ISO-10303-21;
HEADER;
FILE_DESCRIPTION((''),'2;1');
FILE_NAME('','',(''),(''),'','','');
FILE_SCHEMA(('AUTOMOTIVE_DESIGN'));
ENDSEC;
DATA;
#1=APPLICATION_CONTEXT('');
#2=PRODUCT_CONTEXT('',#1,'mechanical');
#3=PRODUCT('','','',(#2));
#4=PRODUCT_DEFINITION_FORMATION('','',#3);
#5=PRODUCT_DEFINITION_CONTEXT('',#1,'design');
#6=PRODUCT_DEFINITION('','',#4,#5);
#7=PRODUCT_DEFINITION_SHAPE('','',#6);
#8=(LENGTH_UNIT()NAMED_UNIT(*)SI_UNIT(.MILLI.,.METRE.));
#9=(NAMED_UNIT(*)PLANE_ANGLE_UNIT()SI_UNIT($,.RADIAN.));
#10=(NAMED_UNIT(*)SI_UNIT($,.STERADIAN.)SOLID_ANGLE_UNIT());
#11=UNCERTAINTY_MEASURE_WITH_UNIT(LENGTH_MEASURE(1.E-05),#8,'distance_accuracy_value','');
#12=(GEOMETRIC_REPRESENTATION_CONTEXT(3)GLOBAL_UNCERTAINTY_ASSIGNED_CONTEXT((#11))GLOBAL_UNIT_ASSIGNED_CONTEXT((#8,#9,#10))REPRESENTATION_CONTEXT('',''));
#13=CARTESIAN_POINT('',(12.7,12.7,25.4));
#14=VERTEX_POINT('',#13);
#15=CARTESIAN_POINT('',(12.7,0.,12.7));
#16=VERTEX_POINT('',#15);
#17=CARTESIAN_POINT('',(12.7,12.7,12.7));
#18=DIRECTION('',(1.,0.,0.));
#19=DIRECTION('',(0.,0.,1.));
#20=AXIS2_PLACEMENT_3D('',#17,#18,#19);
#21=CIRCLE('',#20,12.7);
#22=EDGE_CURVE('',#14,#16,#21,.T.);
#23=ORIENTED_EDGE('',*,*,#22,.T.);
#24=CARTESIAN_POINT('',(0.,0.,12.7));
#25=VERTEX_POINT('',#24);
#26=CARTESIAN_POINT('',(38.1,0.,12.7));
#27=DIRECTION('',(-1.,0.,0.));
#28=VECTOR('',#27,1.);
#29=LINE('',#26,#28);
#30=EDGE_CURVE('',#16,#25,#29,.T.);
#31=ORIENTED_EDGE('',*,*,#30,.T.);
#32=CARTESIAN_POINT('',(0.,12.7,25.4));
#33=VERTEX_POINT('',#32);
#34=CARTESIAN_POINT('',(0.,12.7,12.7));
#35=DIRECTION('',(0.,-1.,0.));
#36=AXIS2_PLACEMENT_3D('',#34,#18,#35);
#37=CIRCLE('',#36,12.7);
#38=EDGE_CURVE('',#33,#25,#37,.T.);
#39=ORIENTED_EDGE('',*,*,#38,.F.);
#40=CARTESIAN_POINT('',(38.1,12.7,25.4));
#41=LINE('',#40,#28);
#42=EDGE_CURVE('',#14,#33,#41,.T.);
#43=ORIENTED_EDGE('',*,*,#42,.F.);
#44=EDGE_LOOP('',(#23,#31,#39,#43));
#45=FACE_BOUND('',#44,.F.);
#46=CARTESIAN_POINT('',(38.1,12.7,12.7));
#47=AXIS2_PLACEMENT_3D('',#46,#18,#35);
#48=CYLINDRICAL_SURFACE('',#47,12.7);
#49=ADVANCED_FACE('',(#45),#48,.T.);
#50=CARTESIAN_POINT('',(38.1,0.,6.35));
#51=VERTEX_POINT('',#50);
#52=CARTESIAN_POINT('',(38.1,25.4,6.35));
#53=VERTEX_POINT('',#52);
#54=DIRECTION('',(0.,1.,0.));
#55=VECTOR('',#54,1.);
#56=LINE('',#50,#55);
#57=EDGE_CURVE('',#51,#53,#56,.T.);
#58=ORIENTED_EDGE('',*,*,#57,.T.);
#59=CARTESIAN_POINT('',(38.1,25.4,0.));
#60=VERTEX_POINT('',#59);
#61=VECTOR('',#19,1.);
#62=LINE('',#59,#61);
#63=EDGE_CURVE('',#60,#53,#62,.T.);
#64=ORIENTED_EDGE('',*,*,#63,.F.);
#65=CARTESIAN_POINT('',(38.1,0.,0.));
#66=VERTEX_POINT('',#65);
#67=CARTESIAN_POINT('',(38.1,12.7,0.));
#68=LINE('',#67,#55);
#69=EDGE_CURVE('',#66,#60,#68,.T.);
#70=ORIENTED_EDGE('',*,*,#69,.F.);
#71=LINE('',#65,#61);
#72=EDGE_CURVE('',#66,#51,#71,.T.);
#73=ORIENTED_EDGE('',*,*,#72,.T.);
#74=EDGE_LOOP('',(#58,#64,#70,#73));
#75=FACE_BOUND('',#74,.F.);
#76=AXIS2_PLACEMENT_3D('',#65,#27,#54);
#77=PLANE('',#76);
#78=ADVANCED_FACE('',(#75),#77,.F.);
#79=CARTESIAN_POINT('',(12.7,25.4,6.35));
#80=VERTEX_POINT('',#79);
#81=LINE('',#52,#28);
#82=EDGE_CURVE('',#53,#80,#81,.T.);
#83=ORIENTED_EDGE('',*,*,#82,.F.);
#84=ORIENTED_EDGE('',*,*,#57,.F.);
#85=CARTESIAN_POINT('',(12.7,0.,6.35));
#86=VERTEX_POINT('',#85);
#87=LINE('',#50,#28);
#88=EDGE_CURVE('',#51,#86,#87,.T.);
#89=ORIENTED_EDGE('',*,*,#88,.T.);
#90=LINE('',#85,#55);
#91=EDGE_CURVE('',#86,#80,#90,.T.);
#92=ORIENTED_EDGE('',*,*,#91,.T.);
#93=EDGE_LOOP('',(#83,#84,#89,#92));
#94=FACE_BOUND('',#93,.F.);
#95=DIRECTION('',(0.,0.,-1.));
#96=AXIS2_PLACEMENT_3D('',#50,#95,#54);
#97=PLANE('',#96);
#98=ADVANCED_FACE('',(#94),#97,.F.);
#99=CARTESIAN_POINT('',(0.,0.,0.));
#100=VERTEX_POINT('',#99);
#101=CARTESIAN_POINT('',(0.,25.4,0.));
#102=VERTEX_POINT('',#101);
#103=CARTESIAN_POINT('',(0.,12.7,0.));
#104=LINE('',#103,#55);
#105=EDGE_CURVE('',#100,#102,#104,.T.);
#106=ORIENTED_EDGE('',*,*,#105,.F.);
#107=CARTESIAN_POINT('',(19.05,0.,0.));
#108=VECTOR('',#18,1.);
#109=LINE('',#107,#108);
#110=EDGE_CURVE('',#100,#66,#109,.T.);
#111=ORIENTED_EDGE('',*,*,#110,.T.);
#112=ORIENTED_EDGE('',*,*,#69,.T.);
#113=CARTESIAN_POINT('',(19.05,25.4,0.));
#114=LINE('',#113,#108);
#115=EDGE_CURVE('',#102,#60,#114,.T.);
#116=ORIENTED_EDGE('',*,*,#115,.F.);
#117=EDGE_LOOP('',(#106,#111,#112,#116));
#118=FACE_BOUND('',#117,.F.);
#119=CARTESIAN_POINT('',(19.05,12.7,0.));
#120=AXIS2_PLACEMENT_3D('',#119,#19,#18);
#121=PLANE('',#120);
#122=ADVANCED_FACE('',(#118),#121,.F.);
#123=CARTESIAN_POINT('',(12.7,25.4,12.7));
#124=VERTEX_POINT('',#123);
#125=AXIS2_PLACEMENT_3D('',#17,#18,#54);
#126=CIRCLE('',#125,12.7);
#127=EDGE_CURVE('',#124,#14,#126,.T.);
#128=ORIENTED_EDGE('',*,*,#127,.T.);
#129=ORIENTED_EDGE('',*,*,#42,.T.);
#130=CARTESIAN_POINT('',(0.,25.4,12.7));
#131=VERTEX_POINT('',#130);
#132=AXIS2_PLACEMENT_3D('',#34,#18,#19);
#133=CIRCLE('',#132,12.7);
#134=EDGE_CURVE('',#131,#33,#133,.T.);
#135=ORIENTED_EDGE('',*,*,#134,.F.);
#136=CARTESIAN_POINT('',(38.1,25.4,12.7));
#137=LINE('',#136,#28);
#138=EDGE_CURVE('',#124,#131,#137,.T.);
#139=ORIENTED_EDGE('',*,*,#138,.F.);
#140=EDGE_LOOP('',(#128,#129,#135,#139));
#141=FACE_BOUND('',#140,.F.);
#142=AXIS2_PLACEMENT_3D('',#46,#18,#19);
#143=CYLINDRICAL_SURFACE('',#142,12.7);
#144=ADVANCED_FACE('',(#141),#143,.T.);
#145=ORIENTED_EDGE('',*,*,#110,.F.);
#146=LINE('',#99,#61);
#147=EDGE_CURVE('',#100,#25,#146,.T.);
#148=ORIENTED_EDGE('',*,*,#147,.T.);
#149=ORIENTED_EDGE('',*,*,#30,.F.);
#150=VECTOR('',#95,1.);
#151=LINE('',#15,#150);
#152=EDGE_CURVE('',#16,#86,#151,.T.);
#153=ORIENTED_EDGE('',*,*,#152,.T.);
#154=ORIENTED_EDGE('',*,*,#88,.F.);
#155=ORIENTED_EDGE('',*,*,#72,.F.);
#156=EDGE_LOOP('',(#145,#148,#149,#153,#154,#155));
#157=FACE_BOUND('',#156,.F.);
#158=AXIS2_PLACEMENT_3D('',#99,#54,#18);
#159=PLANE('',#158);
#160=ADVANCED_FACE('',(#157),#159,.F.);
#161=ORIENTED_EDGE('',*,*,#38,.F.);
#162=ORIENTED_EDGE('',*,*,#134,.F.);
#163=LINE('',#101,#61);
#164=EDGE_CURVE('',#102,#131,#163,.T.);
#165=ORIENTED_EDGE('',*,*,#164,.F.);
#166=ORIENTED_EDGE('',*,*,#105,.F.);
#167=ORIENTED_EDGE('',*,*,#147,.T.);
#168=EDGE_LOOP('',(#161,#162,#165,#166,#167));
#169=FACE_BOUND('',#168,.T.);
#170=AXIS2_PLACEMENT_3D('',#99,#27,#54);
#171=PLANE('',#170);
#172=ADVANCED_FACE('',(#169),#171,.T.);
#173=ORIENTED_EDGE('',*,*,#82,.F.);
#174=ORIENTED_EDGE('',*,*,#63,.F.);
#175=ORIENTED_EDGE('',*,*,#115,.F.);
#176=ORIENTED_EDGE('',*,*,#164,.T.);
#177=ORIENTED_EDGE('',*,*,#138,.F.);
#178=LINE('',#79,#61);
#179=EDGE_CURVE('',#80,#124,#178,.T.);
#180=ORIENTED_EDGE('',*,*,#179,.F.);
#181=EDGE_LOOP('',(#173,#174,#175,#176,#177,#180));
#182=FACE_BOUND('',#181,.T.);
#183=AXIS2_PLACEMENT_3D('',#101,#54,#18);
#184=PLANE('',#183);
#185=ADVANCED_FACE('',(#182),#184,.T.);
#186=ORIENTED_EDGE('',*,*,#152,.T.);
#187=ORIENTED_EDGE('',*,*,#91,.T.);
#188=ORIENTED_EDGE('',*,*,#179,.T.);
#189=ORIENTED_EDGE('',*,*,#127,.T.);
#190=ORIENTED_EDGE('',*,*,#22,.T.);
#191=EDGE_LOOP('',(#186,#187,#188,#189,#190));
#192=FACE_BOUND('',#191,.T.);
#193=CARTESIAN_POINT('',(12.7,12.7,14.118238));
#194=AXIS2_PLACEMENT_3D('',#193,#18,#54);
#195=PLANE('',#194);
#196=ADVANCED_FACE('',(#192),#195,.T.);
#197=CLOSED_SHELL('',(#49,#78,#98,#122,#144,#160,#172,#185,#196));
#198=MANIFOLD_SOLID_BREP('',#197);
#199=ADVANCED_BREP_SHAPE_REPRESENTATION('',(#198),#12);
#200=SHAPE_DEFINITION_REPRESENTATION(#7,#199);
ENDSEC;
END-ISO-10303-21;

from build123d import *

# Parameters (mm, degrees)
F0_W     = 38.1
F0_H     = 25.4
F1_DEPTH = 25.4
F3_DEPTH = 38.101
F4_DEPTH = 38.101
F5_DEPTH = 25.4


with BuildPart() as f1:
    # F0 (on Top) → F1 (new body)
    with BuildSketch(Plane.XY):
        with Locations((19.05, 12.7)):
            Rectangle(F0_W, F0_H)
    extrude(amount=F1_DEPTH)

    # F2 (on face) → F3 (cut, through all)
    with BuildSketch(Plane.YZ.offset(38.1)):
        with BuildLine():
            ThreePointArc((12.7, 25.4), (21.6802561211, 21.6802561211), (25.4, 12.7))
            Line((25.4, 12.7), (25.4, 25.4))
            Line((25.4, 25.4), (12.7, 25.4))
        make_face()
        with BuildLine():
            ThreePointArc((0, 12.7), (3.7197438789, 21.6802561211), (12.7, 25.4))
            Line((12.7, 25.4), (0, 25.4))
            Line((0, 25.4), (0, 12.7))
        make_face()
    extrude(amount=-F3_DEPTH, mode=Mode.SUBTRACT)

    # F2 (on face) → F4 (cut, through all)
    with BuildSketch(Plane.YZ.offset(38.1)):
        with BuildLine():
            ThreePointArc((12.7, 25.4), (21.6802561211, 21.6802561211), (25.4, 12.7))
            Line((25.4, 12.7), (25.4, 25.4))
            Line((25.4, 25.4), (12.7, 25.4))
        make_face()
    extrude(amount=-F4_DEPTH, mode=Mode.SUBTRACT)

    # F2 (on face) → F5 (cut)
    with BuildSketch(Plane.YZ.offset(38.1)):
        with BuildLine():
            Line((25.4, 6.35), (25.4, 12.7))
            ThreePointArc((25.4, 12.7), (21.6802561211, 21.6802561211), (12.7, 25.4))
            ThreePointArc((12.7, 25.4), (3.7197438789, 21.6802561211), (0, 12.7))
            Line((0, 12.7), (0, 6.35))
            Line((0, 6.35), (25.4, 6.35))
        make_face()
    extrude(amount=-F5_DEPTH, mode=Mode.SUBTRACT)


solid = f1.part
